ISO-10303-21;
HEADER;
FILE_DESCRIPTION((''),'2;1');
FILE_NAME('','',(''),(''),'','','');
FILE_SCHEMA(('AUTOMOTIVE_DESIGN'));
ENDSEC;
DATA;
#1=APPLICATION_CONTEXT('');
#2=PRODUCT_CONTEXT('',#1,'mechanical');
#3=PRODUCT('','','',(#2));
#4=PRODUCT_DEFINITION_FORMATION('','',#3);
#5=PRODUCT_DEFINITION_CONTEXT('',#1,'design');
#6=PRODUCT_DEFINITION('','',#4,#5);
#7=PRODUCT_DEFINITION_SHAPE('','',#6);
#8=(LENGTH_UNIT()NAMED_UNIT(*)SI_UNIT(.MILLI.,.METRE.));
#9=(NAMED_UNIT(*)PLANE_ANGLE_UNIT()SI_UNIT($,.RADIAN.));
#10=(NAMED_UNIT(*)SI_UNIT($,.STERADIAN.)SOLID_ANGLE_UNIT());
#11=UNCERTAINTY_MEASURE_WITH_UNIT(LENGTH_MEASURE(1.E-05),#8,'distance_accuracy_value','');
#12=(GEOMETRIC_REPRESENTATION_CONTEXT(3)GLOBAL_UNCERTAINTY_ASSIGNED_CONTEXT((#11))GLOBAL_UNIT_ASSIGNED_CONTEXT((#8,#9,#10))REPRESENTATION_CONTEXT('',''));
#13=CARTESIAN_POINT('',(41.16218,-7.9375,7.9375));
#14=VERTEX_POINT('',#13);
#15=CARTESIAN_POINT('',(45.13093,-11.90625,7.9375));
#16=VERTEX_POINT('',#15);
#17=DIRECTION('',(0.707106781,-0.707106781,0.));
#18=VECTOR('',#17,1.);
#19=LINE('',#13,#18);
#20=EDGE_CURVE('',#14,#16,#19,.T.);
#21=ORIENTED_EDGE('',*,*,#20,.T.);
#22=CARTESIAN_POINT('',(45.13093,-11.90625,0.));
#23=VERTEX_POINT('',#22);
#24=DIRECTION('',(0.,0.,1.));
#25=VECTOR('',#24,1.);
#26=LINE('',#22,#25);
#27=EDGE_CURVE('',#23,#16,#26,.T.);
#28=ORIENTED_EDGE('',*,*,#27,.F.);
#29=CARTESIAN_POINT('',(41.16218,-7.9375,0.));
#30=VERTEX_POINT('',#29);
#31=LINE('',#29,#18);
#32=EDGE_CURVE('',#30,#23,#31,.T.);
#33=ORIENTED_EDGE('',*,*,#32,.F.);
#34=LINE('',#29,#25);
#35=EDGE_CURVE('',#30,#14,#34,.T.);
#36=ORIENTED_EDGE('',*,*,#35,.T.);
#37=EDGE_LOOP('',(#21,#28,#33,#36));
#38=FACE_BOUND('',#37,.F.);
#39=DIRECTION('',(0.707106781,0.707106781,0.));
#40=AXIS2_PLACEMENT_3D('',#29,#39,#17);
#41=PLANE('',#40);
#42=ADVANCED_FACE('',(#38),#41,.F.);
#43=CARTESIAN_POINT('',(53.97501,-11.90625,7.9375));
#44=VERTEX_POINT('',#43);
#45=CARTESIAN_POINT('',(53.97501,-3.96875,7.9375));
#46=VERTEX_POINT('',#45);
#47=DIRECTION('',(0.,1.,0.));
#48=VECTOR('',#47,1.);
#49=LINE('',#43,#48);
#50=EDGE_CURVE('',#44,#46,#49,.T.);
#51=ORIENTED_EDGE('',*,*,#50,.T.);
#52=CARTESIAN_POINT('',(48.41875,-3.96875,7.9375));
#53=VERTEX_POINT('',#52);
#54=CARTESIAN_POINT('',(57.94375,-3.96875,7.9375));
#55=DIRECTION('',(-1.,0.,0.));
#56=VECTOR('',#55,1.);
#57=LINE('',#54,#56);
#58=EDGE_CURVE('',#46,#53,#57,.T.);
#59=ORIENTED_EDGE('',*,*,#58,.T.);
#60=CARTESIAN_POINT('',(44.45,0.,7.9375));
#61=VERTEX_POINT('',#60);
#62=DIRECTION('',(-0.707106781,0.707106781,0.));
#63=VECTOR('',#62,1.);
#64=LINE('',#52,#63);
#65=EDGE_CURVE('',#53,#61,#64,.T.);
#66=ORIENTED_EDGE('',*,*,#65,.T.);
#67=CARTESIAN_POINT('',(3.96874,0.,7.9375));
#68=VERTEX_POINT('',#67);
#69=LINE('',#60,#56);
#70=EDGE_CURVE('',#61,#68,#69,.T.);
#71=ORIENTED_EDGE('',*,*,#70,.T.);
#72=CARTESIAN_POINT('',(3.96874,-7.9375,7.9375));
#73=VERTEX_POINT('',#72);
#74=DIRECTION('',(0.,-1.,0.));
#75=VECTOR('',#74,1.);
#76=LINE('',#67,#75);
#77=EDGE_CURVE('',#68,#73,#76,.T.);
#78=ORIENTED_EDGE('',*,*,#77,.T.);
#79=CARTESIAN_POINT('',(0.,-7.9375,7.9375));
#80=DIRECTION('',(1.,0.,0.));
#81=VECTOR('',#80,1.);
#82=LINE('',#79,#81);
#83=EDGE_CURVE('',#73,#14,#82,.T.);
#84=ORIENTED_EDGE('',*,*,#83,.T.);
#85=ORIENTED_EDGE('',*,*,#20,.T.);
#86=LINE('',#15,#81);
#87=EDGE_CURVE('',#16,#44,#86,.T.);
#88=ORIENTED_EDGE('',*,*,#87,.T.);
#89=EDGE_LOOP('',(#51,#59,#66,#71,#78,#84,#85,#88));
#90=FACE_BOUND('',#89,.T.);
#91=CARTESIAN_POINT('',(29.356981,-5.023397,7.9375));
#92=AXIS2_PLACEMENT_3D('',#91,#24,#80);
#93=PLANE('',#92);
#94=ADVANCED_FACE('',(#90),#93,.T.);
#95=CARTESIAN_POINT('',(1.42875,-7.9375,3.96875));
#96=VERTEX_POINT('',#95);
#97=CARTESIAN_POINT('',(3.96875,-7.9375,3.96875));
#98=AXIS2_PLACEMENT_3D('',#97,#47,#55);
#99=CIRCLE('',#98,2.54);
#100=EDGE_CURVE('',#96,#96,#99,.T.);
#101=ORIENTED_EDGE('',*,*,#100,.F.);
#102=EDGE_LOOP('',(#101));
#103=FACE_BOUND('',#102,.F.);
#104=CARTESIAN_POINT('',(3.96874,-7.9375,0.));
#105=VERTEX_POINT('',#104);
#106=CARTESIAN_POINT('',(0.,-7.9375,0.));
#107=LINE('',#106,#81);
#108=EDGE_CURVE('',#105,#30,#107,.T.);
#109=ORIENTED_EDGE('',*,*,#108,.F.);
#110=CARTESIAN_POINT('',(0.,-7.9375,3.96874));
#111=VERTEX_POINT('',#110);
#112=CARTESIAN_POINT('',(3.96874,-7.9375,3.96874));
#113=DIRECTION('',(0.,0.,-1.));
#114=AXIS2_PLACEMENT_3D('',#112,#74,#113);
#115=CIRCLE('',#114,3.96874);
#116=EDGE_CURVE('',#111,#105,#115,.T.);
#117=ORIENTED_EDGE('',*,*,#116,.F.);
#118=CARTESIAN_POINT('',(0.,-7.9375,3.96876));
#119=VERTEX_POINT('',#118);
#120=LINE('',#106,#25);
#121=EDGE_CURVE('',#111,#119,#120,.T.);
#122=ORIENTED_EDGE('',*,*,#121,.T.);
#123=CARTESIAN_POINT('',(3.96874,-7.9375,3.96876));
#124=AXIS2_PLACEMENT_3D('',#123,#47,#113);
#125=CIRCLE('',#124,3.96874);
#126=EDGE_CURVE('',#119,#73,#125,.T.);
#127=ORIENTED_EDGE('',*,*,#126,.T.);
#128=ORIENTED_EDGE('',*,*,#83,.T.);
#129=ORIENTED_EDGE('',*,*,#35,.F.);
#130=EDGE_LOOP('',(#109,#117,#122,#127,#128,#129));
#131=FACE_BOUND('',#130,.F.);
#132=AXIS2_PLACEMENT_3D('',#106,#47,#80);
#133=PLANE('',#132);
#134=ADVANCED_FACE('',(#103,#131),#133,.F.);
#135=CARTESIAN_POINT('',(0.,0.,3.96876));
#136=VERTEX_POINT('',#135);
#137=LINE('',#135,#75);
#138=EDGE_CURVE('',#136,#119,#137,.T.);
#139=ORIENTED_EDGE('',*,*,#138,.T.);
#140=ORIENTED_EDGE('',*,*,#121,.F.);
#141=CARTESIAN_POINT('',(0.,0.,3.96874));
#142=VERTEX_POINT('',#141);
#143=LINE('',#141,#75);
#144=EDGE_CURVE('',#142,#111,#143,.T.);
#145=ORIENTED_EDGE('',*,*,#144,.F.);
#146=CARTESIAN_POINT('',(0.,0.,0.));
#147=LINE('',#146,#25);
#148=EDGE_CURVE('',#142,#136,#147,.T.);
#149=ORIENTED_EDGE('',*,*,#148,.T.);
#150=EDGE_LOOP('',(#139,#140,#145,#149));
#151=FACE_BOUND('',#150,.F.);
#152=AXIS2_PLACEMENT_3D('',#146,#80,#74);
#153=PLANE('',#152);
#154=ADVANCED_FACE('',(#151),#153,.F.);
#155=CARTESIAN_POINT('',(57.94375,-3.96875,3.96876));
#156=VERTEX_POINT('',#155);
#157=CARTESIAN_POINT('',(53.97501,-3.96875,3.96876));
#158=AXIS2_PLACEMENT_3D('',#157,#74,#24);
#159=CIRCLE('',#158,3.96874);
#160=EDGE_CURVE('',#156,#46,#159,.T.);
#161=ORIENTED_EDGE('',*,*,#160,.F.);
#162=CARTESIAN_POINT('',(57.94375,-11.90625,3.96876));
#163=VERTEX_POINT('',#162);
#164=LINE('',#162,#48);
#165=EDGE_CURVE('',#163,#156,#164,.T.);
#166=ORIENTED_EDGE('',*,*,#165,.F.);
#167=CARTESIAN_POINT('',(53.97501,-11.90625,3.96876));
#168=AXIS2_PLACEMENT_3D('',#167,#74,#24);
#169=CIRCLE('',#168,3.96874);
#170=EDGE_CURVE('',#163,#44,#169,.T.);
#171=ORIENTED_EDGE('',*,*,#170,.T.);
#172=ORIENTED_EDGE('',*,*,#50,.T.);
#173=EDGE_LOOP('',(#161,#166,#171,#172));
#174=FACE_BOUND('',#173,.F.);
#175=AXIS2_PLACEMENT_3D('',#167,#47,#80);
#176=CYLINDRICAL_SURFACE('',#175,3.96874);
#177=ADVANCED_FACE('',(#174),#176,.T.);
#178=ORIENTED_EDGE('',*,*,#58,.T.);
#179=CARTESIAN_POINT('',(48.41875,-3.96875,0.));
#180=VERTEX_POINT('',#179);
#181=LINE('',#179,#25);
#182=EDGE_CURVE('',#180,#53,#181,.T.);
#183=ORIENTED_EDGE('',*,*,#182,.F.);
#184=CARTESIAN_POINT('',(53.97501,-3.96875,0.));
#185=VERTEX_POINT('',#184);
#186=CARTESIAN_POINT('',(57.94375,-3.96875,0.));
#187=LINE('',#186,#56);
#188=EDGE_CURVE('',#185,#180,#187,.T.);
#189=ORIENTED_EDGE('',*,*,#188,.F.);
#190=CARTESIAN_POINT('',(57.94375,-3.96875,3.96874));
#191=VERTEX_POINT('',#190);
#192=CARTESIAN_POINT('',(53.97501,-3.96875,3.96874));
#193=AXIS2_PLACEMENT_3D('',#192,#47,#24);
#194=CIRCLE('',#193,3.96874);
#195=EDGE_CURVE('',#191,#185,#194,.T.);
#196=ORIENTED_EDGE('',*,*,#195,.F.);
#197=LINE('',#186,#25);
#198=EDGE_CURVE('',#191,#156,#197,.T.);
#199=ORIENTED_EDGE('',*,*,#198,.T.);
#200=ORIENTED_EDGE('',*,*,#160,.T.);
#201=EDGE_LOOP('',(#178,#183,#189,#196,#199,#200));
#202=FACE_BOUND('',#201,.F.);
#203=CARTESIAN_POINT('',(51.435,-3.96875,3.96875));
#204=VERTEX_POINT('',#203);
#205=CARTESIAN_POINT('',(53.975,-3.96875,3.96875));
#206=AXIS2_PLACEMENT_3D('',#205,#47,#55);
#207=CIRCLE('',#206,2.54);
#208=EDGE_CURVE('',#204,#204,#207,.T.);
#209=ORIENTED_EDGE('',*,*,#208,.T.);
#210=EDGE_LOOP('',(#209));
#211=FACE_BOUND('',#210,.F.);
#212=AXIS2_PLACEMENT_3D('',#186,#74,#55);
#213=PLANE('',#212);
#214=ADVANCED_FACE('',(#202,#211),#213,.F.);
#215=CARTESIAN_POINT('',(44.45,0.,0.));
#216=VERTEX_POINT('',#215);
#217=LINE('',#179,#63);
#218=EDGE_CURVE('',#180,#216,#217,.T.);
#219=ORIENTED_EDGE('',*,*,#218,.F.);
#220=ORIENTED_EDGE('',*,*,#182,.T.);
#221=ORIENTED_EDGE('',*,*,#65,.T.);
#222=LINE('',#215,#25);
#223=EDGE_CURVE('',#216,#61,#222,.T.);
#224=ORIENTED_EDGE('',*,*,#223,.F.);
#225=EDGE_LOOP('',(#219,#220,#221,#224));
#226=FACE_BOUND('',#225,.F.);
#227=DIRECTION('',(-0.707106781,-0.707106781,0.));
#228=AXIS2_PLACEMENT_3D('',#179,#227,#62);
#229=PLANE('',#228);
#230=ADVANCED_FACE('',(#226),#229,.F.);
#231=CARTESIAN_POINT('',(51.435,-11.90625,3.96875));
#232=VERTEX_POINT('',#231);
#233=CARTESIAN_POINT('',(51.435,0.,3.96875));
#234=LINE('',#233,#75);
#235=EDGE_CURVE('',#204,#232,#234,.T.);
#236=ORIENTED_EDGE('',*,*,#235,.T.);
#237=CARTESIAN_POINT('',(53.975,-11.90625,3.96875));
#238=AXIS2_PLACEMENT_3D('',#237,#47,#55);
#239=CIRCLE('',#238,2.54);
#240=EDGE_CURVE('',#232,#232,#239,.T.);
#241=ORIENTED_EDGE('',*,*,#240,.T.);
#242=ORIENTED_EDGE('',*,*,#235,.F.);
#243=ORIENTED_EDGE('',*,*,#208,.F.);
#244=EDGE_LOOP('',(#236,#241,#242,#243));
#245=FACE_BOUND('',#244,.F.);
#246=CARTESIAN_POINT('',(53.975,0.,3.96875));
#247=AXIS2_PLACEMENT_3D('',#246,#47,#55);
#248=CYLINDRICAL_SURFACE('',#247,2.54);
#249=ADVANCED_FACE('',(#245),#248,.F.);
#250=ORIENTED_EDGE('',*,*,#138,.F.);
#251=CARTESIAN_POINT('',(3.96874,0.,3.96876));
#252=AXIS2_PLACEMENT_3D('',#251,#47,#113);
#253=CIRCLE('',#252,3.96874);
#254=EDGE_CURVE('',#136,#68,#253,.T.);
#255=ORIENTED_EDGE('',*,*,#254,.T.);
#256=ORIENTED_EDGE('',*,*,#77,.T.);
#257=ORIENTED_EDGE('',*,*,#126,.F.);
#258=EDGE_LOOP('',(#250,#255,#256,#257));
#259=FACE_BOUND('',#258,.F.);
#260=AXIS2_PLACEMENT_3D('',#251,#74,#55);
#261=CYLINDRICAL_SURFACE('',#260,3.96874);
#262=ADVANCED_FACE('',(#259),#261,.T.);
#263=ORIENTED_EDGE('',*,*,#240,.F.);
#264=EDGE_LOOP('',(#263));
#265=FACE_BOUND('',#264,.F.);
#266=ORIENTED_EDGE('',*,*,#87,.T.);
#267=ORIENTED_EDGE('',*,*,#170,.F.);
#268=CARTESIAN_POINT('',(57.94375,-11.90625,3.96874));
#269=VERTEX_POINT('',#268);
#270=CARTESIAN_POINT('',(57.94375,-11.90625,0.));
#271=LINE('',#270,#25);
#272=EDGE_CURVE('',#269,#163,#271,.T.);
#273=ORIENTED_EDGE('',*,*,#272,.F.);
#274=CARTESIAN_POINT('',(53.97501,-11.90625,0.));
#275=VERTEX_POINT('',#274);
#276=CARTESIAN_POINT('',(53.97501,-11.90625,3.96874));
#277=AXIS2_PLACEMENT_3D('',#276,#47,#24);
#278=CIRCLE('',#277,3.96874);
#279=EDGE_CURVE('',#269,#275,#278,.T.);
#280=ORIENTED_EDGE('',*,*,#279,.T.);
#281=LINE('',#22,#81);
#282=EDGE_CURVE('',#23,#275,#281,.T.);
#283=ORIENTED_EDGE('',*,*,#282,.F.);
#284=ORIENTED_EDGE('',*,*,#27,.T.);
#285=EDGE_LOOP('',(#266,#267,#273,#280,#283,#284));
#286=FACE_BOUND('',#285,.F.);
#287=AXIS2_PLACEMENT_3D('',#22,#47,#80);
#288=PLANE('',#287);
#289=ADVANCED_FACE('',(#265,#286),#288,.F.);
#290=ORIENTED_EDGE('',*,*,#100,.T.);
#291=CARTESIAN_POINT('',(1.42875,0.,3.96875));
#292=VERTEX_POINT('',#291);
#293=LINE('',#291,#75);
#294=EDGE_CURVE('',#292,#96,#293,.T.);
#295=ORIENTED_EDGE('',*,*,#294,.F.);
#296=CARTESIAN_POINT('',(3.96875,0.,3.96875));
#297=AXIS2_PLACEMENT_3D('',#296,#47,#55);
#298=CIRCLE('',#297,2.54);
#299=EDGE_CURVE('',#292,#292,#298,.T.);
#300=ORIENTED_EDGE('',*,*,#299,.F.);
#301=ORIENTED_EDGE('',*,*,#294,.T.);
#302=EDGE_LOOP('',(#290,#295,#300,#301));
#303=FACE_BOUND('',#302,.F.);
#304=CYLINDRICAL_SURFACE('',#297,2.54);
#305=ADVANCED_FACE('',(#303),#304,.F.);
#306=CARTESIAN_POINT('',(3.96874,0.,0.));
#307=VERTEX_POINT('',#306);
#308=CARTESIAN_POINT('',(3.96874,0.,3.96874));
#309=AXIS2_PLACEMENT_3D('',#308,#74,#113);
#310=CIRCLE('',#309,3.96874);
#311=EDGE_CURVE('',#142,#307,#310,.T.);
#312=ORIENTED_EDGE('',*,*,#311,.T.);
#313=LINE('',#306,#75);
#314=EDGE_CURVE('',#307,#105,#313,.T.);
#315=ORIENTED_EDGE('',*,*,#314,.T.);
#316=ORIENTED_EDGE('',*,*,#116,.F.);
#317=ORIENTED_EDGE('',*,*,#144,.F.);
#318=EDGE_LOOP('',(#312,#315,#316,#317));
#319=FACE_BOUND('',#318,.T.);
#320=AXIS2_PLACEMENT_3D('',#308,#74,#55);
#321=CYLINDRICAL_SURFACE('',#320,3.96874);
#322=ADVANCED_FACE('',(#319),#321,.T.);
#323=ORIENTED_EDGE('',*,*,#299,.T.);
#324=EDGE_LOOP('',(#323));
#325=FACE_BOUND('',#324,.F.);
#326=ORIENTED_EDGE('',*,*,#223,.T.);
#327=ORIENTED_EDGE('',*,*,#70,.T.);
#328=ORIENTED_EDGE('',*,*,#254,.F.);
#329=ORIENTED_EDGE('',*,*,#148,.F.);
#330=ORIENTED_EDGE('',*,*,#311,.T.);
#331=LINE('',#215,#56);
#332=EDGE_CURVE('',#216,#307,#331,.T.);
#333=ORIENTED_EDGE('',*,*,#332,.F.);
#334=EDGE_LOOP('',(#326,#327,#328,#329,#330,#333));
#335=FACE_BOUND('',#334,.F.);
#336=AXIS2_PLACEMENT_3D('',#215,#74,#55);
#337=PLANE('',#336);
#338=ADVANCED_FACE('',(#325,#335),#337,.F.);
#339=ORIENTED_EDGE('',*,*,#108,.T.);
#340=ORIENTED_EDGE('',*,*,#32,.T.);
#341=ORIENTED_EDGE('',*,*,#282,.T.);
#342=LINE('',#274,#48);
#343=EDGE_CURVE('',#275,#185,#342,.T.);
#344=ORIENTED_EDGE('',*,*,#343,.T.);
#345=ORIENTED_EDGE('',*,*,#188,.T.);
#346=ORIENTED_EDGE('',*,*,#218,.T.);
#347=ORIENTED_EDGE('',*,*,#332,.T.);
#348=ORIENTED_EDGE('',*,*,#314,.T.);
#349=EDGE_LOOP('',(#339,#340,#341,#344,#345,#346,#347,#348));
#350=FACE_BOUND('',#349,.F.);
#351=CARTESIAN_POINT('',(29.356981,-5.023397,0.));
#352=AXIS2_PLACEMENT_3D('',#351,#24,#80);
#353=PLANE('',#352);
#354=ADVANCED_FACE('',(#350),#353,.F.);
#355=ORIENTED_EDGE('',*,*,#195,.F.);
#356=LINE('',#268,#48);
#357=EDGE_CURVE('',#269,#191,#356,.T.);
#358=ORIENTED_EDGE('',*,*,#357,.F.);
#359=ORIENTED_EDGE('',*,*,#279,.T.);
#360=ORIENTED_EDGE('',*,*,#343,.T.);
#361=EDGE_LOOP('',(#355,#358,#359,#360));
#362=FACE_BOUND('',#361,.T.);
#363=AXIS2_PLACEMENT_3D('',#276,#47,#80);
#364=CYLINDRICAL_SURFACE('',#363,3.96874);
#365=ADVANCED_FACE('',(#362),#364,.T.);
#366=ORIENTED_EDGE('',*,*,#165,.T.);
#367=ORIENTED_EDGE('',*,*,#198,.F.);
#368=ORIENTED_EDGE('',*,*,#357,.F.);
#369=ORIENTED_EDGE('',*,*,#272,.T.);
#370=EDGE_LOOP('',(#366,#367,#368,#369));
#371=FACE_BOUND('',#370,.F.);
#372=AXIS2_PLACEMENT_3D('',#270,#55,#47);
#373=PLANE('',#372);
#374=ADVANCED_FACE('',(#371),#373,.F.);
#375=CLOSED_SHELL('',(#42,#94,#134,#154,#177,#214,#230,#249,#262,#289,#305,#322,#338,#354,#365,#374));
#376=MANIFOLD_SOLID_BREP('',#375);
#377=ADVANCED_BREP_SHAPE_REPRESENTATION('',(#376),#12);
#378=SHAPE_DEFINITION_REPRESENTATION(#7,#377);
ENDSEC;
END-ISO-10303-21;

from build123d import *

# Parameters (mm, degrees)
F1_DEPTH = 7.9375
F2_R     = 3.96874
F3_R     = 2.54
F4_DEPTH = 11.90625


# Not quite as in the source:
# - a fillet or chamfer is up to 0.001 mm smaller than in the source, because OpenCascade refuses the exact size


with BuildPart() as f1:
    # F0 (on Top) → F1 (new body)
    with BuildSketch(Plane.XY):
        Polygon((44.45, 0), (0, 0), (0, -7.9375), (41.1621798487, -7.9375), (45.1309298487, -11.90625), (57.94375, -11.90625), (57.94375, -3.96875), (48.41875, -3.96875), align=None)
    extrude(amount=F1_DEPTH)

    # F2 (radius 3.96875 in the source; OpenCascade refuses exactly that, so slightly less here)
    f2_edges = [f1.edges().sort_by_distance(p)[0] for p in [
        (0, -3.96875, 0),
        (0, -3.96875, 7.9375),
        (57.94375, -7.9375, 0),
        (57.94375, -7.9375, 7.9375),
    ]]
    fillet(f2_edges, radius=F2_R)

    # F3 (on face) → F4 (cut, through all)
    with BuildSketch(Plane(origin=(0, 0, 0), x_dir=(-1, 0, 0), z_dir=(0, 1, 0))):
        with Locations((-3.96875, 3.96875)):
            Circle(F3_R)
        with Locations((-53.975, 3.96875)):
            Circle(F3_R)
    extrude(amount=-F4_DEPTH, mode=Mode.SUBTRACT)


solid = f1.part
